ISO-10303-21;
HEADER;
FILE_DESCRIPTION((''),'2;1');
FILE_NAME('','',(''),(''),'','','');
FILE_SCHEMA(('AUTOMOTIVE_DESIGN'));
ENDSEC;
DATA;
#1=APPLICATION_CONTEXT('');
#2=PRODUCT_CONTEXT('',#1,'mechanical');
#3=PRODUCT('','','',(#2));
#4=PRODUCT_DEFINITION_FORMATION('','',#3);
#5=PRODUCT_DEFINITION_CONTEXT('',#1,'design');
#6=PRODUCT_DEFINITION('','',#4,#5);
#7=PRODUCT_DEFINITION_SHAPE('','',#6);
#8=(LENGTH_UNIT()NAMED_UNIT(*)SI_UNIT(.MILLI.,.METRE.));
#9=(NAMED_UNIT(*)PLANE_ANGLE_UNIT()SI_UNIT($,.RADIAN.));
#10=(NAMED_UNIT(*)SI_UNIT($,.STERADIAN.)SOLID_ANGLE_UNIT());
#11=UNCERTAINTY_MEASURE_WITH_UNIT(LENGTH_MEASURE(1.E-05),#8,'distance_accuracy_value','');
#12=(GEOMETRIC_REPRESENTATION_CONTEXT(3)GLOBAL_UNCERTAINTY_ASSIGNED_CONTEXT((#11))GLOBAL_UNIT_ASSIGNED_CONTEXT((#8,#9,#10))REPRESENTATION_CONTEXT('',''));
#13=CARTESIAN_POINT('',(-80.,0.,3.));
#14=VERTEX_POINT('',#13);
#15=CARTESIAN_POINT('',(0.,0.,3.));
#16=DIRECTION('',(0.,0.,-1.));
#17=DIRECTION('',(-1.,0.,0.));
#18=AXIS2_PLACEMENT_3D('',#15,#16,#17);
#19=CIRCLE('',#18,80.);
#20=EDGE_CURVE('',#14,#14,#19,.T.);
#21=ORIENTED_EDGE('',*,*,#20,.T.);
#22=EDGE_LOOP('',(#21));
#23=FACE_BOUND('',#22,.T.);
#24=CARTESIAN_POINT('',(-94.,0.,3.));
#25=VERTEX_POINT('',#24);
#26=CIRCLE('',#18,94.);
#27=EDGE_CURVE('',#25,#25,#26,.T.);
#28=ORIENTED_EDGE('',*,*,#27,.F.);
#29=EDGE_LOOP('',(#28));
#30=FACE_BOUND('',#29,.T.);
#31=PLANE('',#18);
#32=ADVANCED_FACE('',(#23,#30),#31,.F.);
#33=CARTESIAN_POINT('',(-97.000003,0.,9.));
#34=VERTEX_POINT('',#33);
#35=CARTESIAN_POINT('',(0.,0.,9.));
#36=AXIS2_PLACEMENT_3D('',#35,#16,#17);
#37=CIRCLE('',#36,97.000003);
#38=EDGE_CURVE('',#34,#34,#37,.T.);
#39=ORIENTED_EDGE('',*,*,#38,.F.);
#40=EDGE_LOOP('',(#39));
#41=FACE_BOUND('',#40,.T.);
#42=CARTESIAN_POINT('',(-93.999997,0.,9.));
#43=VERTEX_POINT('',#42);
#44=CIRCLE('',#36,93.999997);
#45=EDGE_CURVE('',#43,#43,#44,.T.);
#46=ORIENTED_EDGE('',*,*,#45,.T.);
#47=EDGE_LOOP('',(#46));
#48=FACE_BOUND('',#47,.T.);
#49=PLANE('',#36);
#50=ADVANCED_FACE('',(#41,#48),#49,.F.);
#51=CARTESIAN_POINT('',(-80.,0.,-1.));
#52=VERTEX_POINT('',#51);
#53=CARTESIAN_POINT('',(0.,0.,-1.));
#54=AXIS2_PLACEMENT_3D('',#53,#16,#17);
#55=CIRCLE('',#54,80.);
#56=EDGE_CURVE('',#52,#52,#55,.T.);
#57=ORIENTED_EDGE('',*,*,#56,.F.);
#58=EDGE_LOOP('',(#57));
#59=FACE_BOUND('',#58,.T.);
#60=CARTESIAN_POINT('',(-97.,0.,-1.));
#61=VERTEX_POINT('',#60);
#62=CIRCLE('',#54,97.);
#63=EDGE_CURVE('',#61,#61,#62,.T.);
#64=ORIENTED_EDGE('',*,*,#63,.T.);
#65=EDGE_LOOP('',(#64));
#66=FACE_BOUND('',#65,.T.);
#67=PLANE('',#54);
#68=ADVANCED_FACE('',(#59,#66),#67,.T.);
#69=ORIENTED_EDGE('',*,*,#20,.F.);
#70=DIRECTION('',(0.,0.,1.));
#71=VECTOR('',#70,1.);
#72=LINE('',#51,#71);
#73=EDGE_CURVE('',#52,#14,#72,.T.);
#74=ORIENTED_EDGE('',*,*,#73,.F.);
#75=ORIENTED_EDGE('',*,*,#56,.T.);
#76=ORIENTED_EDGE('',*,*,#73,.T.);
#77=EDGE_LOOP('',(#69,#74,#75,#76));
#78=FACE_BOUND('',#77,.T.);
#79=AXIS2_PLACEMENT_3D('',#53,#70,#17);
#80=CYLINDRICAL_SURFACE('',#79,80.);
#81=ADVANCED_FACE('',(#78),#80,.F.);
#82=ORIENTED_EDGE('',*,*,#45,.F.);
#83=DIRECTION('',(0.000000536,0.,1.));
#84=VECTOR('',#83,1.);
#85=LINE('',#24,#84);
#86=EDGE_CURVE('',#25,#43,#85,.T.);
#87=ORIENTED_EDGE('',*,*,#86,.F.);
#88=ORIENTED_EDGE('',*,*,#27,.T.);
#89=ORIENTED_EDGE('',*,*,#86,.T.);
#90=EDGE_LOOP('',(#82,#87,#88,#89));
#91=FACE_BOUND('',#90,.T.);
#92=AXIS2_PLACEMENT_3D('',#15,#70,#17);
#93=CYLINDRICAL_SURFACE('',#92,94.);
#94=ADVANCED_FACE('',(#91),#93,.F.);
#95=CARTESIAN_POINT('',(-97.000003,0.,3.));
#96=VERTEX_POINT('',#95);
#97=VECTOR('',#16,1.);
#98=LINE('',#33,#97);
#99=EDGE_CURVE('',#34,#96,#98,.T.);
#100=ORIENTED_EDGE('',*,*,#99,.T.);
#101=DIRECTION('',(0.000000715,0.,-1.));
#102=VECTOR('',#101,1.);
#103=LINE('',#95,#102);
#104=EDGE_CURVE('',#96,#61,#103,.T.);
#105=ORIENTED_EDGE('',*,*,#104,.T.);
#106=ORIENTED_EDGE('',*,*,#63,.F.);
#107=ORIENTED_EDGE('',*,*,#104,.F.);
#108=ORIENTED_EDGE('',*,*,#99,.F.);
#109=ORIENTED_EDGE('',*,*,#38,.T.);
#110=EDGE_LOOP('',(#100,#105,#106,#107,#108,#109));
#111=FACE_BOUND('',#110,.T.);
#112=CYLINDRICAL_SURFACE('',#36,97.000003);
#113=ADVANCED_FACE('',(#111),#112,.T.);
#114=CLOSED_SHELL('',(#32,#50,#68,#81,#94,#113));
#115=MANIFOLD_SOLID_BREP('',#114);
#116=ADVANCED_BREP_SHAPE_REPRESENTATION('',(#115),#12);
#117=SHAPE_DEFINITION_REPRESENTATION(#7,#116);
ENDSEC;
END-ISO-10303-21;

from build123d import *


# Not quite as in the source:
# - ends of sketch curves that miss each other by under 0.0002 mm in the source are joined


with BuildPart() as f1:
    # F0 (on Front) → F1 (revolve)
    with BuildSketch(Plane.XZ):
        Polygon((-80, 3), (-94, 3), (-93.9999967813, 9), (-97.000002861, 9), (-97.000002861, 3), (-97, -1), (-80, -1), align=None)
    revolve(axis=Axis((0, 0, 1.5), (0, 0, -1)))


solid = f1.part
